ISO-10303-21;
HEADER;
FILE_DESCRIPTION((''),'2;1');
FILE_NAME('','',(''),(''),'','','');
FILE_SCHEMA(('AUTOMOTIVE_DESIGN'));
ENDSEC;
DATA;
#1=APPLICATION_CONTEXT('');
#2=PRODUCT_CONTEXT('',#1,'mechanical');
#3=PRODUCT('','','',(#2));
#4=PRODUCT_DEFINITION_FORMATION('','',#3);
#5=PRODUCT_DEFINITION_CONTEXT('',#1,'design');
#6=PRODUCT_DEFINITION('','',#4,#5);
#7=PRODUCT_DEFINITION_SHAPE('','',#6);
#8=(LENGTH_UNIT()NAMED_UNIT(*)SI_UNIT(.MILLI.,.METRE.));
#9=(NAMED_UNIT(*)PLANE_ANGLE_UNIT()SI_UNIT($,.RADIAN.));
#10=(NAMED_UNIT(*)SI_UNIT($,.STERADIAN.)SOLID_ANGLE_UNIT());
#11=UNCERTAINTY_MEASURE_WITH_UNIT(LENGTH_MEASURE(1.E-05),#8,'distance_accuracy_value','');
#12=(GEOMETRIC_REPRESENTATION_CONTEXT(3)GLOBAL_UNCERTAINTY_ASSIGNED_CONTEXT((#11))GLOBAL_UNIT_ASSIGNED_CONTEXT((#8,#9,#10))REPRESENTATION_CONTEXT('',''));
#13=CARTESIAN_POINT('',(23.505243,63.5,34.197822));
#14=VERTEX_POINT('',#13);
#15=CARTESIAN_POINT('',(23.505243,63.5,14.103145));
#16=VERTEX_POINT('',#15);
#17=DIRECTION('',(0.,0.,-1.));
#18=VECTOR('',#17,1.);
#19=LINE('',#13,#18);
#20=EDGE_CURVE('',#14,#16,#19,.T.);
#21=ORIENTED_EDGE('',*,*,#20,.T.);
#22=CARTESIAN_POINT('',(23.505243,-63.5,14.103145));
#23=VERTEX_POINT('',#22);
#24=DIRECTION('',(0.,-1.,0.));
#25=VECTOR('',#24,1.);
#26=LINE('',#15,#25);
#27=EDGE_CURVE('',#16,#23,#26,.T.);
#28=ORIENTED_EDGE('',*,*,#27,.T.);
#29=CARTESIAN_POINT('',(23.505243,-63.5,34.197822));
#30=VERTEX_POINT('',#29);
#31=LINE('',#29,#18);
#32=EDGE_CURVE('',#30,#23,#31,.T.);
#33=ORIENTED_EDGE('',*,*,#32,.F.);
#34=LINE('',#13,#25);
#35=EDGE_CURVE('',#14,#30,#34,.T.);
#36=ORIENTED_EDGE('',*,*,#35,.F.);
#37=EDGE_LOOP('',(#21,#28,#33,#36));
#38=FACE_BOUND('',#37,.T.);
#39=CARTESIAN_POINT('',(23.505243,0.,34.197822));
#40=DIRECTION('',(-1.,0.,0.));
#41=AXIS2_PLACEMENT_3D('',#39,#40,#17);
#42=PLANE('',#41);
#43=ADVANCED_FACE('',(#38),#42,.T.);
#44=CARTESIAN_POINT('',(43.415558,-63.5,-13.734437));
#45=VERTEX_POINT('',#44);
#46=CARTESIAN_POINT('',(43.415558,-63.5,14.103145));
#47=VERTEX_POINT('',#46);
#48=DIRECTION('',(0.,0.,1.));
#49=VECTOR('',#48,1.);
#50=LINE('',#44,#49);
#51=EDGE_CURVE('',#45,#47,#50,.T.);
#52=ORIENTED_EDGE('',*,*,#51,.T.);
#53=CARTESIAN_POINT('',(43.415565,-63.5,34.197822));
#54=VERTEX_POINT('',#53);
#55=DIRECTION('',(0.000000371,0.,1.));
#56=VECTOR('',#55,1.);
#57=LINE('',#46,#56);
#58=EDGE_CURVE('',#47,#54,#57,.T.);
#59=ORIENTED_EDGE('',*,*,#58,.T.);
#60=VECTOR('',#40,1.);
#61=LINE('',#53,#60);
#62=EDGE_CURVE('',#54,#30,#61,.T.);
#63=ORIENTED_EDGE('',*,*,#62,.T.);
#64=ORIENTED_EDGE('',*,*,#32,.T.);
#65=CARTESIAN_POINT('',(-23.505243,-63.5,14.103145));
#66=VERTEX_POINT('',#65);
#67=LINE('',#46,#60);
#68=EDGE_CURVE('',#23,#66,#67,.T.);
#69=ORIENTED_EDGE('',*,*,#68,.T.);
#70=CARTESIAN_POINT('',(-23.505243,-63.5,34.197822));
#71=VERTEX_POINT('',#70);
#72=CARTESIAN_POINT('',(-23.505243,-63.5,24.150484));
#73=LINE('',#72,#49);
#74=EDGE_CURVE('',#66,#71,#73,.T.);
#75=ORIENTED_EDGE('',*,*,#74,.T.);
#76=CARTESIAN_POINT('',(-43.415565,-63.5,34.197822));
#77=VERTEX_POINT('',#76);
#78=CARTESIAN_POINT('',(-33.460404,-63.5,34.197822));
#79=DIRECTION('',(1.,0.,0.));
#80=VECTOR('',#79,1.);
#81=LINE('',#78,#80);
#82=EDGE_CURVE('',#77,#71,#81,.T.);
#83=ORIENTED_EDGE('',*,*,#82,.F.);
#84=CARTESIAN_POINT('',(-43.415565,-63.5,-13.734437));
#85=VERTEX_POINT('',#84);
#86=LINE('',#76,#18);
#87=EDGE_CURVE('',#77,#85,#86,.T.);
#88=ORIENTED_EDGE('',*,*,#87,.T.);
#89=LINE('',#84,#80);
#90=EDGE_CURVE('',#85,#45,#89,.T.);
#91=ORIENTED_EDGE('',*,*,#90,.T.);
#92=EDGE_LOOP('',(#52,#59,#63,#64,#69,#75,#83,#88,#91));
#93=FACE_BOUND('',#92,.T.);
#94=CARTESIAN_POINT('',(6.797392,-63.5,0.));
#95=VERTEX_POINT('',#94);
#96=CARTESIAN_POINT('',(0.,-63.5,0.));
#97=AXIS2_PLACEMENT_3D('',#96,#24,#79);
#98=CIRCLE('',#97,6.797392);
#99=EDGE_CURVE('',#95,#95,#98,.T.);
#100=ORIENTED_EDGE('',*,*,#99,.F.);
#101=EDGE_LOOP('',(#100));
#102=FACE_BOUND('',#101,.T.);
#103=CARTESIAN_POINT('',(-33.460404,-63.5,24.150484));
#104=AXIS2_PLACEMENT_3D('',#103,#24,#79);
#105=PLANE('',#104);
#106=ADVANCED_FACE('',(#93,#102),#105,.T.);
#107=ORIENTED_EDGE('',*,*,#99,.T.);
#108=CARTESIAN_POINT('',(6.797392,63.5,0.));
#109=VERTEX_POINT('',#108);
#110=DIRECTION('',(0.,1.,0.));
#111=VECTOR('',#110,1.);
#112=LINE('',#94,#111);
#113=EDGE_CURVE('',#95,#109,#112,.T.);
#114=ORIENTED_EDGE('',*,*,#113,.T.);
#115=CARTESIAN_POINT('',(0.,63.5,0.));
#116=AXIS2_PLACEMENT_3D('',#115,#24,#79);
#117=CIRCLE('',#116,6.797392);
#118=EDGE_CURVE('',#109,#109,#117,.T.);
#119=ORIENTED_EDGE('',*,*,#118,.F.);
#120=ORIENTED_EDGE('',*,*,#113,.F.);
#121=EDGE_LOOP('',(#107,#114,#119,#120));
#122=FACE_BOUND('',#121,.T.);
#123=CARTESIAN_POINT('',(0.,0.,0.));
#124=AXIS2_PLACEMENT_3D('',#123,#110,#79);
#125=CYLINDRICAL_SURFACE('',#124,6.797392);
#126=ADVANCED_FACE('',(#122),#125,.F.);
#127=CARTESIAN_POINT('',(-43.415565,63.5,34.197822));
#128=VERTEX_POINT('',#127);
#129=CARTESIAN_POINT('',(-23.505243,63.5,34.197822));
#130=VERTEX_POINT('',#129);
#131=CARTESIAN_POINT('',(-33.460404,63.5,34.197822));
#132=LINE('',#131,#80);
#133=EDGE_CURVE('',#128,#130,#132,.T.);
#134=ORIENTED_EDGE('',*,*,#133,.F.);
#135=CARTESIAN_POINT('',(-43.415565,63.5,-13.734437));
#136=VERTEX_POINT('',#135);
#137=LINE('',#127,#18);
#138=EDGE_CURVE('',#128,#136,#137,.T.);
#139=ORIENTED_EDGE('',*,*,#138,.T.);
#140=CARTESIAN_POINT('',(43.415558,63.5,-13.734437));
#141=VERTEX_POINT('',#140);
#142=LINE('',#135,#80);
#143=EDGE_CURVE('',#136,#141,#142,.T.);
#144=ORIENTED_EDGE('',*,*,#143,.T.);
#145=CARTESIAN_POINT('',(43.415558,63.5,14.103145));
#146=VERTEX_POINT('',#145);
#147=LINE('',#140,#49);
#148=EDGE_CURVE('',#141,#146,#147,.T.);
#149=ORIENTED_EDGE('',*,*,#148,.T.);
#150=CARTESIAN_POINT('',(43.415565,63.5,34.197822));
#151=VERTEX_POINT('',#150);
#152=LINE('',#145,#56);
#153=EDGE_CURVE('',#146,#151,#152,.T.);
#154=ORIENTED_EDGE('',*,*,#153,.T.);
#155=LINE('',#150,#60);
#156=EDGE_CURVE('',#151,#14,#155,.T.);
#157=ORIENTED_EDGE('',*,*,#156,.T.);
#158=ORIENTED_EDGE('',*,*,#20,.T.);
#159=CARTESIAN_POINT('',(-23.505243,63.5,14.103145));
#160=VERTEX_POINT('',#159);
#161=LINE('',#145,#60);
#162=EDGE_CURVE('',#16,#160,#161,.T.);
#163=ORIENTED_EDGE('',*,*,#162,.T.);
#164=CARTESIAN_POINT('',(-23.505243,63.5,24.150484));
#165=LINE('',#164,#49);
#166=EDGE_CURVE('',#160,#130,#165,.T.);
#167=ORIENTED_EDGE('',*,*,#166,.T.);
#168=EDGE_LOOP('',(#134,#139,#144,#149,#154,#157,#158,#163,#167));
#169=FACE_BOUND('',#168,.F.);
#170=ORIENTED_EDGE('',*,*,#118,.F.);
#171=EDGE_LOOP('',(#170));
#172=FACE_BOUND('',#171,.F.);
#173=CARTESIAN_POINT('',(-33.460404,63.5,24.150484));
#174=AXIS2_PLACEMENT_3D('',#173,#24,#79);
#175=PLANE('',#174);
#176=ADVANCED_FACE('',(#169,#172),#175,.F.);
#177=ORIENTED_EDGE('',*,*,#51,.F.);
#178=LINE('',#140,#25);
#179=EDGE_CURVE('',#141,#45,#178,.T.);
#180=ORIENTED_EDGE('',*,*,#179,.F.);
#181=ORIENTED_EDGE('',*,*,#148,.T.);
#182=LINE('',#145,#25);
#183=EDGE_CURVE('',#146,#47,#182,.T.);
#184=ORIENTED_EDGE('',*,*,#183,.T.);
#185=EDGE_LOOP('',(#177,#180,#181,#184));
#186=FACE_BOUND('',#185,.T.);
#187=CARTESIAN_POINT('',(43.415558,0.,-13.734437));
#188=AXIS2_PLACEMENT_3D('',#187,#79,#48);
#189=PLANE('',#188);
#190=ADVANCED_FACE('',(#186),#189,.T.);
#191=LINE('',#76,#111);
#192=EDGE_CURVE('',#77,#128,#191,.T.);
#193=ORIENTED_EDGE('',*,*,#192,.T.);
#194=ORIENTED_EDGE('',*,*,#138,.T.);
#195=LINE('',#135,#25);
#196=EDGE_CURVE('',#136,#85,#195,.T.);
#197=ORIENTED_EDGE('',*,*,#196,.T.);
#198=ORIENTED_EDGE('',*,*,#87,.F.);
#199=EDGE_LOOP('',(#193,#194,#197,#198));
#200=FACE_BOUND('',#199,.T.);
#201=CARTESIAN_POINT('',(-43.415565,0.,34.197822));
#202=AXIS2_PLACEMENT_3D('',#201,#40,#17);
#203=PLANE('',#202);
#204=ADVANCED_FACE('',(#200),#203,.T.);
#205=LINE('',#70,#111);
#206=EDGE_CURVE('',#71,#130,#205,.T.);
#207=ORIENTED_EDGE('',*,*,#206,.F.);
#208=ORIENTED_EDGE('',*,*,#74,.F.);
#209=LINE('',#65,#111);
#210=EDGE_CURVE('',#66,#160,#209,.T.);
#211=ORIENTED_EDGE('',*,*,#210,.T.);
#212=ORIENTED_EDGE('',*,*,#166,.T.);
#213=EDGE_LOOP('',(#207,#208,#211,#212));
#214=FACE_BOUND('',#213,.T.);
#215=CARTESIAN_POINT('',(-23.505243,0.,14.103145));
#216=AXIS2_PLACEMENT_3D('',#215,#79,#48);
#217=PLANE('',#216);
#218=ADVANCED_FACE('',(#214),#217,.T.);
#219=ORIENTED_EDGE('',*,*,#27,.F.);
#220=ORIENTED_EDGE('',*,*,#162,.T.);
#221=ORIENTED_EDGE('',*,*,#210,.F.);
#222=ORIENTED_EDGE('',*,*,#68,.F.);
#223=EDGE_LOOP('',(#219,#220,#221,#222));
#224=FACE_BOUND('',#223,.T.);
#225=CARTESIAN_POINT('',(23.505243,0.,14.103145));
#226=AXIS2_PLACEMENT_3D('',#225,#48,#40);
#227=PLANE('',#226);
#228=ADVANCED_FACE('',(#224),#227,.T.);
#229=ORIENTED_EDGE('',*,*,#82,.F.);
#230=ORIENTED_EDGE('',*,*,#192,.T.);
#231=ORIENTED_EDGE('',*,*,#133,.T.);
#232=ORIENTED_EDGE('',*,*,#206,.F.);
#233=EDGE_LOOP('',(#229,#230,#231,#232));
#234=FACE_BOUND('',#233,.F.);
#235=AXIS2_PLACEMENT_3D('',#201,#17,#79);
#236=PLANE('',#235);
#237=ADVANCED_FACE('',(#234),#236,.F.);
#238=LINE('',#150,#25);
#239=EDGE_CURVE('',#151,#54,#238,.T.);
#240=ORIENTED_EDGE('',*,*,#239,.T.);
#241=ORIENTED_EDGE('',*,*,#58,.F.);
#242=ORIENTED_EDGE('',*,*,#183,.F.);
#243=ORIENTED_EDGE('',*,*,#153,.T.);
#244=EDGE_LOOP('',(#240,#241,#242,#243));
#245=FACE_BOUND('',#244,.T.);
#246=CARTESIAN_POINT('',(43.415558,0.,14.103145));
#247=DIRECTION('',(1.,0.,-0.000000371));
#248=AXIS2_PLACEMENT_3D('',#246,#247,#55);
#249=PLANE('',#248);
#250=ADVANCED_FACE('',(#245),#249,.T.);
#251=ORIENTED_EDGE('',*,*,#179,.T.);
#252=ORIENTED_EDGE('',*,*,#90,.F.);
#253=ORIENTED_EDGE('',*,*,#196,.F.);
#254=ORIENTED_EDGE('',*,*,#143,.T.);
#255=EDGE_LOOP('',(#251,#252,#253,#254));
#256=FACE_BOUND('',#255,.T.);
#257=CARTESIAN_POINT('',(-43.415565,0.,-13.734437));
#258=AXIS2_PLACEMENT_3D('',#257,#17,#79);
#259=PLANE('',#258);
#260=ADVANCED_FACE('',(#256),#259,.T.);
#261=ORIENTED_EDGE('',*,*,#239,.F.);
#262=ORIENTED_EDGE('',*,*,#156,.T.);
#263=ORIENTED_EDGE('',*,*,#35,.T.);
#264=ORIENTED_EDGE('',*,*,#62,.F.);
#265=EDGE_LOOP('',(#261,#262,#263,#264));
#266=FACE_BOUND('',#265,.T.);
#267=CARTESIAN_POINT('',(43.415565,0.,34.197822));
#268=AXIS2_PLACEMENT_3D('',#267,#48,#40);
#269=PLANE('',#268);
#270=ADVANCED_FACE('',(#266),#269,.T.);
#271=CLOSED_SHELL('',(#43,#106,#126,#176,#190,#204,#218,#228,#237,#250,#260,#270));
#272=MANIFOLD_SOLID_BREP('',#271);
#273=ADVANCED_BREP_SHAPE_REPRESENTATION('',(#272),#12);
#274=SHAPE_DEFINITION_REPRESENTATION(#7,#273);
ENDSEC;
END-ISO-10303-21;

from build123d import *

# Parameters (mm, degrees)
F0_W     = 19.9103225023
F0_H     = 20.0946768746
F0_R     = 6.7973918103
F1_DEPTH = 63.5


# Not quite as in the source:
# - ends of sketch curves that miss each other by under 0.0002 mm in the source are joined


with BuildPart() as f1:
    # F0 (on Front) → F1 (new body, symmetric)
    with BuildSketch(Plane.XZ):
        with Locations((-33.4604037926, 24.1504837759)):
            Rectangle(F0_W, F0_H)
        Polygon((-23.5052425414, 14.1031453386), (-43.4155650437, 14.1031453386), (-43.4155650437, -13.7344365939), (43.4155575931, -13.7344365939), (43.4155575931, 14.1031453386), (23.5052425414, 14.1031453386), align=None)
        Circle(F0_R, mode=Mode.SUBTRACT)
        Polygon((23.5052425414, 34.1978222132), (23.5052425414, 14.1031453386), (43.4155575931, 14.1031453386), (43.4155650437, 34.1978222132), align=None)
    extrude(amount=F1_DEPTH, both=True)


solid = f1.part
